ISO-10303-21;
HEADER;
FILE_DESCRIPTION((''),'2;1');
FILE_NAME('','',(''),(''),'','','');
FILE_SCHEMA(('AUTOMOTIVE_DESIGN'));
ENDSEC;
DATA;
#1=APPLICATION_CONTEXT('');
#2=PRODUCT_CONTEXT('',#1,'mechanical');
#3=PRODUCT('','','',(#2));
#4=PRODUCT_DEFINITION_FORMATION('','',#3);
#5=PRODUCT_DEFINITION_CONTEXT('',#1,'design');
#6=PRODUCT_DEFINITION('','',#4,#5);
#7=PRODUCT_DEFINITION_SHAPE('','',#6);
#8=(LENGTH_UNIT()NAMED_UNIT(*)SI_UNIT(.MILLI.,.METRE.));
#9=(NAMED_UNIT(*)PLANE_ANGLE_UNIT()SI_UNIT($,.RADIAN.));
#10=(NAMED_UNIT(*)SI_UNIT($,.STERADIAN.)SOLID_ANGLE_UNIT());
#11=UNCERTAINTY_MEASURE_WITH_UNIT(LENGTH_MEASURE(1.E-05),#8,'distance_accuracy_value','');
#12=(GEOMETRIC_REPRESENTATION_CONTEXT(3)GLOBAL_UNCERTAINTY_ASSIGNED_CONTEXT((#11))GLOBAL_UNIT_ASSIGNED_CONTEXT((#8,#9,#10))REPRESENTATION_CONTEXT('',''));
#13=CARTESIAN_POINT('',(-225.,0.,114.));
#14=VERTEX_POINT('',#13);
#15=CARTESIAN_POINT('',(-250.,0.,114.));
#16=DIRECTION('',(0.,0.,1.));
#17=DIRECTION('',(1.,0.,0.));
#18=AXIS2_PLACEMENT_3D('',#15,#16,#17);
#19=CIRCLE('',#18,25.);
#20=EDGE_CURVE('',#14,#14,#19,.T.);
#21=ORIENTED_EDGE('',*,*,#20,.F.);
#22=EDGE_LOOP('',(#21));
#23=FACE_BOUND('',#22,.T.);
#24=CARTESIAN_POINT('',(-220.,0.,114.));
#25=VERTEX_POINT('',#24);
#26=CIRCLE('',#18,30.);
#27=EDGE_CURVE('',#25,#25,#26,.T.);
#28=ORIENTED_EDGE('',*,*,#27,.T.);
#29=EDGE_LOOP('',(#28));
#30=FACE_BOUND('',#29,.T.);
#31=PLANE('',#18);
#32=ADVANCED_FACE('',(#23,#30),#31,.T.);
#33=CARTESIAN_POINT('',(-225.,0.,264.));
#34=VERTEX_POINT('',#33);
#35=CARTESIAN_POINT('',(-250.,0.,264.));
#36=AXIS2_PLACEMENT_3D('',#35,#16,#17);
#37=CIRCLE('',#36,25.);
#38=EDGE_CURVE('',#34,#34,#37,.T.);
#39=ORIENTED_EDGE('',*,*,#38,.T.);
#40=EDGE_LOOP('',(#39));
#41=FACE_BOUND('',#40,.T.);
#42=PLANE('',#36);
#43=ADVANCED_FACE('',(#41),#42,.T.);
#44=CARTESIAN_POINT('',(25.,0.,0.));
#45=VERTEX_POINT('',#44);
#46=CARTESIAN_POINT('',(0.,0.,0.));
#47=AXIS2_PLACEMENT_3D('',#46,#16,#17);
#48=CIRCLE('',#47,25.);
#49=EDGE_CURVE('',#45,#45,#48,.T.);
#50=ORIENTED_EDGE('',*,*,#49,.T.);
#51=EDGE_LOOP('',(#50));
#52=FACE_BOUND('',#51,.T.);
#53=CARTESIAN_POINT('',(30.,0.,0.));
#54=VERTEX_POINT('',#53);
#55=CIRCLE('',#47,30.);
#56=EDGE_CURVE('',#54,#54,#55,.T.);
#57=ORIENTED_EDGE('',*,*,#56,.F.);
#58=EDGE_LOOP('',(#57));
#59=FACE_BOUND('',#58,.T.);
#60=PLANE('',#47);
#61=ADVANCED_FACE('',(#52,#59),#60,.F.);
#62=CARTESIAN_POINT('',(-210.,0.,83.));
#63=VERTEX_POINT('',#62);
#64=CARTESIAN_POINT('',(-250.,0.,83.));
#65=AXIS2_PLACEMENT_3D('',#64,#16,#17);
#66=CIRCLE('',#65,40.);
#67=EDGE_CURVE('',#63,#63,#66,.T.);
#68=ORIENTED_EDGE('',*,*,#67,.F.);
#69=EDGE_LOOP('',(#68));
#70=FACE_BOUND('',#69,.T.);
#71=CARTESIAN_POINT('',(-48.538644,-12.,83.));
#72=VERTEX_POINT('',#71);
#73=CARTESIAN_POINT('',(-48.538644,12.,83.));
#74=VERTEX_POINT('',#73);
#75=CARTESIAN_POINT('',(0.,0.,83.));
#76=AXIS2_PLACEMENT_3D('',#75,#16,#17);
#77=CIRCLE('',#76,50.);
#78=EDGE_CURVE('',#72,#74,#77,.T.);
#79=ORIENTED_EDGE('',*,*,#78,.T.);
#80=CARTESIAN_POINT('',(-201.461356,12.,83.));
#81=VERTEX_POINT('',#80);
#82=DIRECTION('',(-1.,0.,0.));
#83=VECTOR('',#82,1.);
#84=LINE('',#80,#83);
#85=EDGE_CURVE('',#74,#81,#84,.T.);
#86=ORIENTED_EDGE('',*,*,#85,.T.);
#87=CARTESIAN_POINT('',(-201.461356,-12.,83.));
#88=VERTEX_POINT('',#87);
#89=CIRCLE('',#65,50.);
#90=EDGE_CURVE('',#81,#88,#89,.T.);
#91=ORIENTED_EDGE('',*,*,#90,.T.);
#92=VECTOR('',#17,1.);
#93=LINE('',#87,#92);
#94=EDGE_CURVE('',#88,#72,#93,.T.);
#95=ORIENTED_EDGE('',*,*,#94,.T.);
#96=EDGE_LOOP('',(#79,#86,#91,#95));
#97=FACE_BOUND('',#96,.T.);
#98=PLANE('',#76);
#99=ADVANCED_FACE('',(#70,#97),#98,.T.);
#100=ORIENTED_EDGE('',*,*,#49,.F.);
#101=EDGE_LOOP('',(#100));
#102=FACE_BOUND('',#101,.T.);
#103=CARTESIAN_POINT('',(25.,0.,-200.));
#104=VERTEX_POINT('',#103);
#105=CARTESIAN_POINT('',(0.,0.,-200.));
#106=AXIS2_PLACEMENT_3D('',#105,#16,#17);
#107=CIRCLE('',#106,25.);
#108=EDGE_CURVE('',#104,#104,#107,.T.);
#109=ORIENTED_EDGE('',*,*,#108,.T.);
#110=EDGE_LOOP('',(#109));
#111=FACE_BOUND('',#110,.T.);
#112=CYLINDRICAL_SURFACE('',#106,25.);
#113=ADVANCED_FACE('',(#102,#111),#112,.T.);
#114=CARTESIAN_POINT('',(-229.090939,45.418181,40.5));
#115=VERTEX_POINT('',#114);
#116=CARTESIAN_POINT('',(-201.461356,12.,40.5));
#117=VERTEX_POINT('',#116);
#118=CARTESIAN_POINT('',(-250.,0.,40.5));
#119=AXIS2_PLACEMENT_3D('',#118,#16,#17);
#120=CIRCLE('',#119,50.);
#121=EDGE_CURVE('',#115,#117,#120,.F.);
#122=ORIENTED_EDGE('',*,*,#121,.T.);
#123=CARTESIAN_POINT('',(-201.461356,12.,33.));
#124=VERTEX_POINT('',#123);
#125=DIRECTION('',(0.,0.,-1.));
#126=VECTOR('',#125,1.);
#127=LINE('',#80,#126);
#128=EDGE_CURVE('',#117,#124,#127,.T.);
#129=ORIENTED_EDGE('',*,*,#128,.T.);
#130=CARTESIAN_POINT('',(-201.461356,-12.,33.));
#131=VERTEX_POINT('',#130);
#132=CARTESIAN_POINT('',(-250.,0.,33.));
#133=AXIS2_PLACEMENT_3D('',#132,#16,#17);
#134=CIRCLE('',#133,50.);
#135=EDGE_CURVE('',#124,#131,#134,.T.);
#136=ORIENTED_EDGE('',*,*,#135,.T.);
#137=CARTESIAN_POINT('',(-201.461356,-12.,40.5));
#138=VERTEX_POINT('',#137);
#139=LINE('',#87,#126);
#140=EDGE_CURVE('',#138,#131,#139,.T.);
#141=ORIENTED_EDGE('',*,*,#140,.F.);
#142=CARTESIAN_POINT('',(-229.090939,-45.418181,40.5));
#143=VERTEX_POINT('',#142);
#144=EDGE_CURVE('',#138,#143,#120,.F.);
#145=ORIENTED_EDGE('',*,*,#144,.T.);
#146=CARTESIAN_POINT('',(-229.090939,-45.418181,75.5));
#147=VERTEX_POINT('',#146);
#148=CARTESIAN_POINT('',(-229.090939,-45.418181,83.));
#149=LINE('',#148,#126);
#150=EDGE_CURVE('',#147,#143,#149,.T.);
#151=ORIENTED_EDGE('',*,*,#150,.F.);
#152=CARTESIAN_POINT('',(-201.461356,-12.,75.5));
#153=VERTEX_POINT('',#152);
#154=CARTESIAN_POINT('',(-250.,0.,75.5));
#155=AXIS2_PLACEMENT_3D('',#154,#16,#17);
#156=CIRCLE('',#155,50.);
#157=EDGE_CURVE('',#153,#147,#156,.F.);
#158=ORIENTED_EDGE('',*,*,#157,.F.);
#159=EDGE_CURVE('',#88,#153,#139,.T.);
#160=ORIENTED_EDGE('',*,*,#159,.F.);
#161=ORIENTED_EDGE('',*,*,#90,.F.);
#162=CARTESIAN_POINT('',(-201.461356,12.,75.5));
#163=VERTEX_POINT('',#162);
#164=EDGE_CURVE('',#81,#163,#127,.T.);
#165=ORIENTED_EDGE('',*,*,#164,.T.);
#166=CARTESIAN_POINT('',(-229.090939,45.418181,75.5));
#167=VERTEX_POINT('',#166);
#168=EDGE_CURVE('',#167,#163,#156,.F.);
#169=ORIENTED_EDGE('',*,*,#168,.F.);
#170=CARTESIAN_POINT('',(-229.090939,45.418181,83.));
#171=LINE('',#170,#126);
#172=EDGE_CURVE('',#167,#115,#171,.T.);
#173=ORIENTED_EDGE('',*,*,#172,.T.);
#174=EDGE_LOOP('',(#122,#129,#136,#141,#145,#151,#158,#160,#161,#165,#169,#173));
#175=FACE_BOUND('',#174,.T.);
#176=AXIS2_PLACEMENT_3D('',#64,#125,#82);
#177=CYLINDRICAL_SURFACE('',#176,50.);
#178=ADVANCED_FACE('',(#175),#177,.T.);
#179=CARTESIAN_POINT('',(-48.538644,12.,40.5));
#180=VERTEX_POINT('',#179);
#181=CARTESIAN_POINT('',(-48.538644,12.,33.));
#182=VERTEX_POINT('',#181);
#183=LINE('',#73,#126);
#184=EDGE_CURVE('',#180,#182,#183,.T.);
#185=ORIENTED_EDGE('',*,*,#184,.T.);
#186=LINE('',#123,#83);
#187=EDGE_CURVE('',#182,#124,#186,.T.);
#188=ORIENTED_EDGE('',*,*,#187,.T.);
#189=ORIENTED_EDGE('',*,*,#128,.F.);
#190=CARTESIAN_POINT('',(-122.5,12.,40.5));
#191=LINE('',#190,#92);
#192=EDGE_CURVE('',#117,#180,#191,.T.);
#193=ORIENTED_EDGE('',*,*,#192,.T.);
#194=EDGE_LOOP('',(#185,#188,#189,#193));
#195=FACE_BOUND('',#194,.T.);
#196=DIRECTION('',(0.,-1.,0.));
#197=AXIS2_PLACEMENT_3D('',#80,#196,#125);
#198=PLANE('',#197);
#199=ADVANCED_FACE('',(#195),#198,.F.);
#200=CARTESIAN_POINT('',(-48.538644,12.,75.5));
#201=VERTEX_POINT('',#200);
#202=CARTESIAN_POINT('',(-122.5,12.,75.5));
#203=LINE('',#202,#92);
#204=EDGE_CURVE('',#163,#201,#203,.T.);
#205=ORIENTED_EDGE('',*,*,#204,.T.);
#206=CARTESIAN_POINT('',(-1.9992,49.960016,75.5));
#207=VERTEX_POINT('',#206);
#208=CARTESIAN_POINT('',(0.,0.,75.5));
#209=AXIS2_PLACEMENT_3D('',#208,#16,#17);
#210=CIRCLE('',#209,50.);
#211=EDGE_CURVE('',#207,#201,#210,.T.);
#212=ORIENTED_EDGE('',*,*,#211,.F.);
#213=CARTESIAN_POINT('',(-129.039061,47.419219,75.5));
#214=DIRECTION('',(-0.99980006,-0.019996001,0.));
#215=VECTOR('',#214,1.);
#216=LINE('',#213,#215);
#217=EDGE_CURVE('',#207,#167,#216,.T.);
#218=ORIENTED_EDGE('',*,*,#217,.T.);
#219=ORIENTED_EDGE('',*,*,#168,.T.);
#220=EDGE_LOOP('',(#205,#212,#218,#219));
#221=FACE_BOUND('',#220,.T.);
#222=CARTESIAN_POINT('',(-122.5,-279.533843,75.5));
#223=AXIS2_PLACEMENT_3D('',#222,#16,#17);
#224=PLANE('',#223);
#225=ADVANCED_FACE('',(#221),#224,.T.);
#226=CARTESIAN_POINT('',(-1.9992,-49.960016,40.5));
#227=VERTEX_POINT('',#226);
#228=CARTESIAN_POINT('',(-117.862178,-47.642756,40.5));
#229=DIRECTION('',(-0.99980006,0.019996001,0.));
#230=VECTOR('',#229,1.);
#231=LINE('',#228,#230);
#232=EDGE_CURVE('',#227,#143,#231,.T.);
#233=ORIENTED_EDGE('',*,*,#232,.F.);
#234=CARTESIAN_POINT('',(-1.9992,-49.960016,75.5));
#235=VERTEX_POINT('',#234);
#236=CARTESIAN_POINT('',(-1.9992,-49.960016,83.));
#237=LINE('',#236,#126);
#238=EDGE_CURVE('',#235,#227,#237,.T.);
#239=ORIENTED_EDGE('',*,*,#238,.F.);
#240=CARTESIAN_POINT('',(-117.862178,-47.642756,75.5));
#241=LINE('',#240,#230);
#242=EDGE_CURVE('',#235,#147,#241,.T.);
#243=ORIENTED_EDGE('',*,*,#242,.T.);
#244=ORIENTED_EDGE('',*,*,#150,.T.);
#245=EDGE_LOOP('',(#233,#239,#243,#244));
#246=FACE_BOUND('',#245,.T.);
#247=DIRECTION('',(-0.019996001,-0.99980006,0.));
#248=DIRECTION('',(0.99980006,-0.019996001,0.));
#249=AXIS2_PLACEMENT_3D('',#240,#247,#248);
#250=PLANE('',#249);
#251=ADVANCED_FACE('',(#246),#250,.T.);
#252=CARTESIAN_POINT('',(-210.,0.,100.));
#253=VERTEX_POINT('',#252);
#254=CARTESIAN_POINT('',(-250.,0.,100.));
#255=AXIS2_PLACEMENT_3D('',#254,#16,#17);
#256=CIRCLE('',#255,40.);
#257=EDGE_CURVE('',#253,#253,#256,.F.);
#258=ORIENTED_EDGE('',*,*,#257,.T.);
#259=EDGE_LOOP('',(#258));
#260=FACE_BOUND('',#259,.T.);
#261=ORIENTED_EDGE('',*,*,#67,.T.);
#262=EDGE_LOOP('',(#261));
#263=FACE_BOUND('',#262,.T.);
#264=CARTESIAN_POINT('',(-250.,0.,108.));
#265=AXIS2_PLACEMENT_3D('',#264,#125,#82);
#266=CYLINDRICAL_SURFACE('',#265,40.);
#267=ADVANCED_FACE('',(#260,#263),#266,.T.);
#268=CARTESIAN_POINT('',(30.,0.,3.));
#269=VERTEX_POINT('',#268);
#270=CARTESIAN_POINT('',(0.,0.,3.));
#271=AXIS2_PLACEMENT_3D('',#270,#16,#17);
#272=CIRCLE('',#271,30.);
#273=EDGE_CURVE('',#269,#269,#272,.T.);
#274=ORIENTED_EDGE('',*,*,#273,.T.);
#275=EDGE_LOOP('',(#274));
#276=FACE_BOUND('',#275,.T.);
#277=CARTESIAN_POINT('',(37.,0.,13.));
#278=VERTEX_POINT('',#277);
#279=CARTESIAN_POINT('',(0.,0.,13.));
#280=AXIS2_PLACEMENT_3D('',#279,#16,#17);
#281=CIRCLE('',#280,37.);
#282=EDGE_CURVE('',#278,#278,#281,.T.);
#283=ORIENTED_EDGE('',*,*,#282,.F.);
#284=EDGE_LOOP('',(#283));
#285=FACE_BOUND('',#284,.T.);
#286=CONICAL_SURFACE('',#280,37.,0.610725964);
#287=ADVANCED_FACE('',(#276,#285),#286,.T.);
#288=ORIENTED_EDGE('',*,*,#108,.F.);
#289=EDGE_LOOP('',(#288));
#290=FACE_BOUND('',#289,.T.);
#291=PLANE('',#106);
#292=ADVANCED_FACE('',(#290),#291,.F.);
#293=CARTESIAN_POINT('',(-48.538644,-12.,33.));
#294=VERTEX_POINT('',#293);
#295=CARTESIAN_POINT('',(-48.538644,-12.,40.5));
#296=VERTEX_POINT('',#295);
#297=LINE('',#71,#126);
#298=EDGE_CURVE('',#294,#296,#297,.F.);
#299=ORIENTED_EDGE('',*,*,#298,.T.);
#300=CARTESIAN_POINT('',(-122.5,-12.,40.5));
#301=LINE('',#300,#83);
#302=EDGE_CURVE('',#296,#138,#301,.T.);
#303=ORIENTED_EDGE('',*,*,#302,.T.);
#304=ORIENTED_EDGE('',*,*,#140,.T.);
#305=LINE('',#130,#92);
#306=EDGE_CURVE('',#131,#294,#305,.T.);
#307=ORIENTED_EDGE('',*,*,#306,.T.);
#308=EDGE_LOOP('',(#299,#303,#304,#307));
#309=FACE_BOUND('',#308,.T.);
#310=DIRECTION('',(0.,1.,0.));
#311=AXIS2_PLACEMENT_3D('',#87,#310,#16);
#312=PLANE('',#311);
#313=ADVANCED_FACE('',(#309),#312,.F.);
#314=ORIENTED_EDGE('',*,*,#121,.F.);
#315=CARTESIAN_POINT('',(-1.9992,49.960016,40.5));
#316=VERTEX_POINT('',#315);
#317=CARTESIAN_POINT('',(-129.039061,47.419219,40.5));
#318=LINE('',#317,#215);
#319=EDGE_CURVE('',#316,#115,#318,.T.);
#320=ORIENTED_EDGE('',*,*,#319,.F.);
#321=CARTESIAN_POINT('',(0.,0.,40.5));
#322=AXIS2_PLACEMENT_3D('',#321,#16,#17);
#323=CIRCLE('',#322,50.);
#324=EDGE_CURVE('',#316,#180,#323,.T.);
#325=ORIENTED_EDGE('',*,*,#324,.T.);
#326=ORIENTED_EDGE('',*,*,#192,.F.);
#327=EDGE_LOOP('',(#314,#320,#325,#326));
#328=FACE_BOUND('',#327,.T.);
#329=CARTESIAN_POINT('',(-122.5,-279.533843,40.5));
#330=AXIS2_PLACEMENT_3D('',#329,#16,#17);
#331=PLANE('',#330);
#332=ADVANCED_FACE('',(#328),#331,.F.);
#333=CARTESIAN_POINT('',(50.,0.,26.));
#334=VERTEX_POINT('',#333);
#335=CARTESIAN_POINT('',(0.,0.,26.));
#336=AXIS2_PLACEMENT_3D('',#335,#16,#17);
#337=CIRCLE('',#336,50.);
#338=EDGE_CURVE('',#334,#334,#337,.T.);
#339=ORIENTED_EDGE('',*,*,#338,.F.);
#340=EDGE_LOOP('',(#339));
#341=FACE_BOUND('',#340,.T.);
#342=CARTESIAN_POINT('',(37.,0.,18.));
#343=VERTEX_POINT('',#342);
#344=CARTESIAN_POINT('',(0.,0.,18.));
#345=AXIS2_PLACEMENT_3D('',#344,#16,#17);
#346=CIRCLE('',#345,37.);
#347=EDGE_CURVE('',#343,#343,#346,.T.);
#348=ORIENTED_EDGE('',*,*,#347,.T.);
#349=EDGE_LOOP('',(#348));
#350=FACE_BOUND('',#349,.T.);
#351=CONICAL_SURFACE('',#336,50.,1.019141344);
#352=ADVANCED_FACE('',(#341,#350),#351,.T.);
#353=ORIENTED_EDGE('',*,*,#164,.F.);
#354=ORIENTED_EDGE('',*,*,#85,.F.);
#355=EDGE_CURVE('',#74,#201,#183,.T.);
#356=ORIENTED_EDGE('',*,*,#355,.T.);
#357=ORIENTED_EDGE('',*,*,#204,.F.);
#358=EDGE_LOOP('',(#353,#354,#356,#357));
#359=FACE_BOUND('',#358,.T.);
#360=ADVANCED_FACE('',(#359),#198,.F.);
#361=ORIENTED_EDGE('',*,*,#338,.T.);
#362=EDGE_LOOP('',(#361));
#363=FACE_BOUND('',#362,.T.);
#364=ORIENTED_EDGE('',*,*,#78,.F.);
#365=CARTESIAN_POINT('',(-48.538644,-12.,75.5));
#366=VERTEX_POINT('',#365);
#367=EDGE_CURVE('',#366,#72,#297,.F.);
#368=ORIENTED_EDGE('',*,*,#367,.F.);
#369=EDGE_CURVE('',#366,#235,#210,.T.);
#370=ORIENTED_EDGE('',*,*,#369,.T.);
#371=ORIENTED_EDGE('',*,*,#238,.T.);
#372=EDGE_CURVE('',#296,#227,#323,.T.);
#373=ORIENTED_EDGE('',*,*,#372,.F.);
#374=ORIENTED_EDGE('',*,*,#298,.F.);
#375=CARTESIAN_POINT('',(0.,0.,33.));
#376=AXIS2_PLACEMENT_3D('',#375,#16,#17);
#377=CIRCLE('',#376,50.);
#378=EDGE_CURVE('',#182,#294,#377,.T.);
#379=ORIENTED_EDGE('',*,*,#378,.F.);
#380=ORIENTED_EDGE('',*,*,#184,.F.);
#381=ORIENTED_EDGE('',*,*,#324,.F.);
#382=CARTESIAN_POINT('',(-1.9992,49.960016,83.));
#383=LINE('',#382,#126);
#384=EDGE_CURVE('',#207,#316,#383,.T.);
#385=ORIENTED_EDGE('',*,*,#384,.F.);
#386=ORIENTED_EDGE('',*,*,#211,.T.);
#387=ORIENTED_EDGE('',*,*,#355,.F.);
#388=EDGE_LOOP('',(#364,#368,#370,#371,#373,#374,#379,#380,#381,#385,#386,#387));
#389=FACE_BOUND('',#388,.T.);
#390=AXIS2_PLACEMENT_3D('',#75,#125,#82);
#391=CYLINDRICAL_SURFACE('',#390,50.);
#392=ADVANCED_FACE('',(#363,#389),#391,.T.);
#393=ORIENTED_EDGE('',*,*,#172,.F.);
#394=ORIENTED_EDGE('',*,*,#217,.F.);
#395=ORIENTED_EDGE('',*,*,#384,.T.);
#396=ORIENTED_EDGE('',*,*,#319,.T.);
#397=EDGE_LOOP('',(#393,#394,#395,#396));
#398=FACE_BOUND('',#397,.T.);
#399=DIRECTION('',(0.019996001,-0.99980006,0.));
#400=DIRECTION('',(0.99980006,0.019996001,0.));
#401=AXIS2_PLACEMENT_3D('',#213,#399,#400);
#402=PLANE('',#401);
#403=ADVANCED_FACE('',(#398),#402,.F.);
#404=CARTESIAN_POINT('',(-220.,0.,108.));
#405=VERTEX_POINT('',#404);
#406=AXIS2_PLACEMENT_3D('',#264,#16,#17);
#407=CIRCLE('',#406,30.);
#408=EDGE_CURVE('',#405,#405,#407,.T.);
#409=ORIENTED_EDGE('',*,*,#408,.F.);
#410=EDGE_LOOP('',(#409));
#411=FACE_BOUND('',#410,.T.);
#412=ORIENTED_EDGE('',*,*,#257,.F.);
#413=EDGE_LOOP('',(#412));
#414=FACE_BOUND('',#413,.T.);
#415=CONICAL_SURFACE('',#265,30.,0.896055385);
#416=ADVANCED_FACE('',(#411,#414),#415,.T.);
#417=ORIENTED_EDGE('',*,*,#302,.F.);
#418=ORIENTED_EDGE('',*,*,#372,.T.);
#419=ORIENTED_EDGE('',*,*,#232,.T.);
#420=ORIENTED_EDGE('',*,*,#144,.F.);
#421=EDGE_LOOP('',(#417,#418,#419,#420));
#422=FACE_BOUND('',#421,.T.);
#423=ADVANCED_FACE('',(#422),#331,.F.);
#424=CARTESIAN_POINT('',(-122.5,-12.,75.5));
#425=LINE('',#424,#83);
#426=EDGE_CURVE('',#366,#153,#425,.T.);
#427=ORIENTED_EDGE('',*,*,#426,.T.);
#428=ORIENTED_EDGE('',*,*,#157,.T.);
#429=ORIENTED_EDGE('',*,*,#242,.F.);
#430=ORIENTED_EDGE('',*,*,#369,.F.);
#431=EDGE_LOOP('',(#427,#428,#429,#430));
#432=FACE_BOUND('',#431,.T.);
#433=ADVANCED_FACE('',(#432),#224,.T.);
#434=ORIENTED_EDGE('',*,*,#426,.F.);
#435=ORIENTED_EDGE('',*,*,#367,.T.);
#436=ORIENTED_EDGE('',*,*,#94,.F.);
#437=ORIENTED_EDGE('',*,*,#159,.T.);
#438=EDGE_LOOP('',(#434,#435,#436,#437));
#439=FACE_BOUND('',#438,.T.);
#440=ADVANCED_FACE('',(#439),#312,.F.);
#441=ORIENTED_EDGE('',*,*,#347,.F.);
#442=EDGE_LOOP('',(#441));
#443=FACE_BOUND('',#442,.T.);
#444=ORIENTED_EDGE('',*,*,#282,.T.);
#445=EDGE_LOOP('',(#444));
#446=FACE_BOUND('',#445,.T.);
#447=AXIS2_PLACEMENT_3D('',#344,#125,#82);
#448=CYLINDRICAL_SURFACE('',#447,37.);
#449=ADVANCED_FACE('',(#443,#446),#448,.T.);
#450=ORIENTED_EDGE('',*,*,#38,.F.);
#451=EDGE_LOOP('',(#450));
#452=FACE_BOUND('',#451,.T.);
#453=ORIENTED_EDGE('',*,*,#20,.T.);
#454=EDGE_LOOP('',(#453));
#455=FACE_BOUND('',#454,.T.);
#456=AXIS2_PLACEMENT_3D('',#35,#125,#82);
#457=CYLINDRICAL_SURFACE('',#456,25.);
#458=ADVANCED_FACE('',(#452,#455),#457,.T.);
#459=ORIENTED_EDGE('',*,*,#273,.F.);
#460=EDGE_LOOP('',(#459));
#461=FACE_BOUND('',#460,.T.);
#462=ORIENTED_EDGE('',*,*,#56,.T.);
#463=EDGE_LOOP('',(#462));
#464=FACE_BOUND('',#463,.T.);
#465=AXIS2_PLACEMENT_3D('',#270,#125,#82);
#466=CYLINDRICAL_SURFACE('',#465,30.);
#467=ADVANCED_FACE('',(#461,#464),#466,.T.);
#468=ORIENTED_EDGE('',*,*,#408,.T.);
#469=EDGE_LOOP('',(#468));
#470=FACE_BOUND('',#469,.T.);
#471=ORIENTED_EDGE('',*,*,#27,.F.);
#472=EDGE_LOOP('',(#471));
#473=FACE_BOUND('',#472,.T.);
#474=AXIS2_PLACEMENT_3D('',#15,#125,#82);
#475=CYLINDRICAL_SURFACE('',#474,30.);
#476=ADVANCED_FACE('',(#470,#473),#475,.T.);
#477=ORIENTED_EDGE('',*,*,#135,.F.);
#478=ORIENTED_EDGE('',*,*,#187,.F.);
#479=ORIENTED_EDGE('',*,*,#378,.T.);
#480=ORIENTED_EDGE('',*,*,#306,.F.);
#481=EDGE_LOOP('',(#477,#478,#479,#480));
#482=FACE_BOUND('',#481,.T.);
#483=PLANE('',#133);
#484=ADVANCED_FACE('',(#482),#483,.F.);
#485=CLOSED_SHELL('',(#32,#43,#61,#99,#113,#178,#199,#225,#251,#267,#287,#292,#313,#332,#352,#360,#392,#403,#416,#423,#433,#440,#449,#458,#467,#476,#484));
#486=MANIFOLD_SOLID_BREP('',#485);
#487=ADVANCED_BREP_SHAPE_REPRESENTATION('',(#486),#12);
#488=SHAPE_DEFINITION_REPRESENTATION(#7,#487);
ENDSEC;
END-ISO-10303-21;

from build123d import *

# Parameters (mm, degrees)
SKETCH_1_R      = 25
EXTRUDE_1_DEPTH = 200
SKETCH_2_R      = 30
EXTRUDE_2_DEPTH = 3
SKETCH_3_R      = 37
EXTRUDE_3_DEPTH = 15
SKETCH_4_R      = 50
EXTRUDE_4_DEPTH = 65
CHAMFER_1_SIZE2 = 7
CHAMFER_1_SIZE  = 10
CHAMFER_2_SIZE2 = 8
CHAMFER_2_SIZE  = 13
EXTRUDE_5_DEPTH = 17.5
EXTRUDE_6_DEPTH = 25
SKETCH_7_R      = 40
EXTRUDE_7_DEPTH = 25
SKETCH_8_R      = 30
EXTRUDE_8_DEPTH = 6
CHAMFER_3_SIZE2 = 10
CHAMFER_3_SIZE  = 8
SKETCH_9_R      = 25
EXTRUDE_9_DEPTH = 150


with BuildPart() as part:
    # 草图1 → 凸台-拉伸1 (new body)
    with BuildSketch(Plane.XY):
        Circle(SKETCH_1_R)
    extrude(amount=-EXTRUDE_1_DEPTH)

    # 草图2 → 凸台-拉伸2 (add)
    with BuildSketch(Plane.XY):
        Circle(SKETCH_2_R)
    extrude(amount=EXTRUDE_2_DEPTH)

    # 草图3 → 凸台-拉伸3 (add)
    with BuildSketch(Plane.XY.offset(3)):
        Circle(SKETCH_3_R)
    extrude(amount=EXTRUDE_3_DEPTH)

    # 草图4 → 凸台-拉伸4 (add)
    with BuildSketch(Plane.XY.offset(18)):
        Circle(SKETCH_4_R)
    extrude(amount=EXTRUDE_4_DEPTH)

    # 倒角1
    chamfer_1_edges = [part.edges().sort_by_distance(p)[0] for p in [
        (-37, 0, 3),
    ]]
    chamfer_1_side = [part.faces().sort_by_distance(p)[0] for p in [
        (-37, 0, 3.14),
    ]]
    chamfer(chamfer_1_edges, length=CHAMFER_1_SIZE - 0.0001, length2=CHAMFER_1_SIZE2 - 0.0001, reference=chamfer_1_side[0])  # a hair under: the kernel refuses the full size

    # 倒角2
    chamfer_2_edges = [part.edges().sort_by_distance(p)[0] for p in [
        (-50, 0, 18),
    ]]
    chamfer_2_side = [part.faces().sort_by_distance(p)[0] for p in [
        (-49.84, 0, 18),
    ]]
    chamfer(chamfer_2_edges, length=CHAMFER_2_SIZE - 0.0001, length2=CHAMFER_2_SIZE2 - 0.0001, reference=chamfer_2_side[0])  # a hair under: the kernel refuses the full size

    # 草图5 → 凸台-拉伸5 (add, symmetric)
    with BuildSketch(Plane.XY.offset(58)):
        with BuildLine():
            Line((-1.99920032, 49.960015994), (-250, 45))
            ThreePointArc((-250, 45), (-295, 0), (-250, -45))
            Line((-250, -45), (-1.99920032, -49.960015994))
            ThreePointArc((-1.99920032, -49.960015994), (-50, 0), (-1.99920032, 49.960015994))
        make_face()
    extrude(amount=EXTRUDE_5_DEPTH, both=True)

    # 草图6 → 凸台-拉伸6 (add, symmetric)
    with BuildSketch(Plane.XY.offset(58)):
        with BuildLine():
            Line((-201.461355602, -12), (0, -12))
            Line((0, -12), (0, 12))
            Line((0, 12), (-201.461355602, 12))
            ThreePointArc((-201.461355602, 12), (-300, 0), (-201.461355602, -12))
        make_face()
    extrude(amount=EXTRUDE_6_DEPTH, both=True)

    # 草图7 → 凸台-拉伸7 (add)
    with BuildSketch(Plane.XY.offset(83)):
        with Locations((-250, 0)):
            Circle(SKETCH_7_R)
    extrude(amount=EXTRUDE_7_DEPTH)

    # 草图8 → 凸台-拉伸8 (add)
    with BuildSketch(Plane.XY.offset(108)):
        with Locations((-250, 0)):
            Circle(SKETCH_8_R)
    extrude(amount=EXTRUDE_8_DEPTH)

    # 倒角3
    chamfer_3_edges = [part.edges().sort_by_distance(p)[0] for p in [
        (-290, 0, 108),
    ]]
    chamfer_3_side = [part.faces().sort_by_distance(p)[0] for p in [
        (-290, 0, 107.84),
    ]]
    chamfer(chamfer_3_edges, length=CHAMFER_3_SIZE - 0.0001, length2=CHAMFER_3_SIZE2 - 0.0001, reference=chamfer_3_side[0])  # a hair under: the kernel refuses the full size

    # 草图9 → 凸台-拉伸9 (add)
    with BuildSketch(Plane.XY.offset(114)):
        with Locations((-250, 0)):
            Circle(SKETCH_9_R)
    extrude(amount=EXTRUDE_9_DEPTH)


solid = part.part
